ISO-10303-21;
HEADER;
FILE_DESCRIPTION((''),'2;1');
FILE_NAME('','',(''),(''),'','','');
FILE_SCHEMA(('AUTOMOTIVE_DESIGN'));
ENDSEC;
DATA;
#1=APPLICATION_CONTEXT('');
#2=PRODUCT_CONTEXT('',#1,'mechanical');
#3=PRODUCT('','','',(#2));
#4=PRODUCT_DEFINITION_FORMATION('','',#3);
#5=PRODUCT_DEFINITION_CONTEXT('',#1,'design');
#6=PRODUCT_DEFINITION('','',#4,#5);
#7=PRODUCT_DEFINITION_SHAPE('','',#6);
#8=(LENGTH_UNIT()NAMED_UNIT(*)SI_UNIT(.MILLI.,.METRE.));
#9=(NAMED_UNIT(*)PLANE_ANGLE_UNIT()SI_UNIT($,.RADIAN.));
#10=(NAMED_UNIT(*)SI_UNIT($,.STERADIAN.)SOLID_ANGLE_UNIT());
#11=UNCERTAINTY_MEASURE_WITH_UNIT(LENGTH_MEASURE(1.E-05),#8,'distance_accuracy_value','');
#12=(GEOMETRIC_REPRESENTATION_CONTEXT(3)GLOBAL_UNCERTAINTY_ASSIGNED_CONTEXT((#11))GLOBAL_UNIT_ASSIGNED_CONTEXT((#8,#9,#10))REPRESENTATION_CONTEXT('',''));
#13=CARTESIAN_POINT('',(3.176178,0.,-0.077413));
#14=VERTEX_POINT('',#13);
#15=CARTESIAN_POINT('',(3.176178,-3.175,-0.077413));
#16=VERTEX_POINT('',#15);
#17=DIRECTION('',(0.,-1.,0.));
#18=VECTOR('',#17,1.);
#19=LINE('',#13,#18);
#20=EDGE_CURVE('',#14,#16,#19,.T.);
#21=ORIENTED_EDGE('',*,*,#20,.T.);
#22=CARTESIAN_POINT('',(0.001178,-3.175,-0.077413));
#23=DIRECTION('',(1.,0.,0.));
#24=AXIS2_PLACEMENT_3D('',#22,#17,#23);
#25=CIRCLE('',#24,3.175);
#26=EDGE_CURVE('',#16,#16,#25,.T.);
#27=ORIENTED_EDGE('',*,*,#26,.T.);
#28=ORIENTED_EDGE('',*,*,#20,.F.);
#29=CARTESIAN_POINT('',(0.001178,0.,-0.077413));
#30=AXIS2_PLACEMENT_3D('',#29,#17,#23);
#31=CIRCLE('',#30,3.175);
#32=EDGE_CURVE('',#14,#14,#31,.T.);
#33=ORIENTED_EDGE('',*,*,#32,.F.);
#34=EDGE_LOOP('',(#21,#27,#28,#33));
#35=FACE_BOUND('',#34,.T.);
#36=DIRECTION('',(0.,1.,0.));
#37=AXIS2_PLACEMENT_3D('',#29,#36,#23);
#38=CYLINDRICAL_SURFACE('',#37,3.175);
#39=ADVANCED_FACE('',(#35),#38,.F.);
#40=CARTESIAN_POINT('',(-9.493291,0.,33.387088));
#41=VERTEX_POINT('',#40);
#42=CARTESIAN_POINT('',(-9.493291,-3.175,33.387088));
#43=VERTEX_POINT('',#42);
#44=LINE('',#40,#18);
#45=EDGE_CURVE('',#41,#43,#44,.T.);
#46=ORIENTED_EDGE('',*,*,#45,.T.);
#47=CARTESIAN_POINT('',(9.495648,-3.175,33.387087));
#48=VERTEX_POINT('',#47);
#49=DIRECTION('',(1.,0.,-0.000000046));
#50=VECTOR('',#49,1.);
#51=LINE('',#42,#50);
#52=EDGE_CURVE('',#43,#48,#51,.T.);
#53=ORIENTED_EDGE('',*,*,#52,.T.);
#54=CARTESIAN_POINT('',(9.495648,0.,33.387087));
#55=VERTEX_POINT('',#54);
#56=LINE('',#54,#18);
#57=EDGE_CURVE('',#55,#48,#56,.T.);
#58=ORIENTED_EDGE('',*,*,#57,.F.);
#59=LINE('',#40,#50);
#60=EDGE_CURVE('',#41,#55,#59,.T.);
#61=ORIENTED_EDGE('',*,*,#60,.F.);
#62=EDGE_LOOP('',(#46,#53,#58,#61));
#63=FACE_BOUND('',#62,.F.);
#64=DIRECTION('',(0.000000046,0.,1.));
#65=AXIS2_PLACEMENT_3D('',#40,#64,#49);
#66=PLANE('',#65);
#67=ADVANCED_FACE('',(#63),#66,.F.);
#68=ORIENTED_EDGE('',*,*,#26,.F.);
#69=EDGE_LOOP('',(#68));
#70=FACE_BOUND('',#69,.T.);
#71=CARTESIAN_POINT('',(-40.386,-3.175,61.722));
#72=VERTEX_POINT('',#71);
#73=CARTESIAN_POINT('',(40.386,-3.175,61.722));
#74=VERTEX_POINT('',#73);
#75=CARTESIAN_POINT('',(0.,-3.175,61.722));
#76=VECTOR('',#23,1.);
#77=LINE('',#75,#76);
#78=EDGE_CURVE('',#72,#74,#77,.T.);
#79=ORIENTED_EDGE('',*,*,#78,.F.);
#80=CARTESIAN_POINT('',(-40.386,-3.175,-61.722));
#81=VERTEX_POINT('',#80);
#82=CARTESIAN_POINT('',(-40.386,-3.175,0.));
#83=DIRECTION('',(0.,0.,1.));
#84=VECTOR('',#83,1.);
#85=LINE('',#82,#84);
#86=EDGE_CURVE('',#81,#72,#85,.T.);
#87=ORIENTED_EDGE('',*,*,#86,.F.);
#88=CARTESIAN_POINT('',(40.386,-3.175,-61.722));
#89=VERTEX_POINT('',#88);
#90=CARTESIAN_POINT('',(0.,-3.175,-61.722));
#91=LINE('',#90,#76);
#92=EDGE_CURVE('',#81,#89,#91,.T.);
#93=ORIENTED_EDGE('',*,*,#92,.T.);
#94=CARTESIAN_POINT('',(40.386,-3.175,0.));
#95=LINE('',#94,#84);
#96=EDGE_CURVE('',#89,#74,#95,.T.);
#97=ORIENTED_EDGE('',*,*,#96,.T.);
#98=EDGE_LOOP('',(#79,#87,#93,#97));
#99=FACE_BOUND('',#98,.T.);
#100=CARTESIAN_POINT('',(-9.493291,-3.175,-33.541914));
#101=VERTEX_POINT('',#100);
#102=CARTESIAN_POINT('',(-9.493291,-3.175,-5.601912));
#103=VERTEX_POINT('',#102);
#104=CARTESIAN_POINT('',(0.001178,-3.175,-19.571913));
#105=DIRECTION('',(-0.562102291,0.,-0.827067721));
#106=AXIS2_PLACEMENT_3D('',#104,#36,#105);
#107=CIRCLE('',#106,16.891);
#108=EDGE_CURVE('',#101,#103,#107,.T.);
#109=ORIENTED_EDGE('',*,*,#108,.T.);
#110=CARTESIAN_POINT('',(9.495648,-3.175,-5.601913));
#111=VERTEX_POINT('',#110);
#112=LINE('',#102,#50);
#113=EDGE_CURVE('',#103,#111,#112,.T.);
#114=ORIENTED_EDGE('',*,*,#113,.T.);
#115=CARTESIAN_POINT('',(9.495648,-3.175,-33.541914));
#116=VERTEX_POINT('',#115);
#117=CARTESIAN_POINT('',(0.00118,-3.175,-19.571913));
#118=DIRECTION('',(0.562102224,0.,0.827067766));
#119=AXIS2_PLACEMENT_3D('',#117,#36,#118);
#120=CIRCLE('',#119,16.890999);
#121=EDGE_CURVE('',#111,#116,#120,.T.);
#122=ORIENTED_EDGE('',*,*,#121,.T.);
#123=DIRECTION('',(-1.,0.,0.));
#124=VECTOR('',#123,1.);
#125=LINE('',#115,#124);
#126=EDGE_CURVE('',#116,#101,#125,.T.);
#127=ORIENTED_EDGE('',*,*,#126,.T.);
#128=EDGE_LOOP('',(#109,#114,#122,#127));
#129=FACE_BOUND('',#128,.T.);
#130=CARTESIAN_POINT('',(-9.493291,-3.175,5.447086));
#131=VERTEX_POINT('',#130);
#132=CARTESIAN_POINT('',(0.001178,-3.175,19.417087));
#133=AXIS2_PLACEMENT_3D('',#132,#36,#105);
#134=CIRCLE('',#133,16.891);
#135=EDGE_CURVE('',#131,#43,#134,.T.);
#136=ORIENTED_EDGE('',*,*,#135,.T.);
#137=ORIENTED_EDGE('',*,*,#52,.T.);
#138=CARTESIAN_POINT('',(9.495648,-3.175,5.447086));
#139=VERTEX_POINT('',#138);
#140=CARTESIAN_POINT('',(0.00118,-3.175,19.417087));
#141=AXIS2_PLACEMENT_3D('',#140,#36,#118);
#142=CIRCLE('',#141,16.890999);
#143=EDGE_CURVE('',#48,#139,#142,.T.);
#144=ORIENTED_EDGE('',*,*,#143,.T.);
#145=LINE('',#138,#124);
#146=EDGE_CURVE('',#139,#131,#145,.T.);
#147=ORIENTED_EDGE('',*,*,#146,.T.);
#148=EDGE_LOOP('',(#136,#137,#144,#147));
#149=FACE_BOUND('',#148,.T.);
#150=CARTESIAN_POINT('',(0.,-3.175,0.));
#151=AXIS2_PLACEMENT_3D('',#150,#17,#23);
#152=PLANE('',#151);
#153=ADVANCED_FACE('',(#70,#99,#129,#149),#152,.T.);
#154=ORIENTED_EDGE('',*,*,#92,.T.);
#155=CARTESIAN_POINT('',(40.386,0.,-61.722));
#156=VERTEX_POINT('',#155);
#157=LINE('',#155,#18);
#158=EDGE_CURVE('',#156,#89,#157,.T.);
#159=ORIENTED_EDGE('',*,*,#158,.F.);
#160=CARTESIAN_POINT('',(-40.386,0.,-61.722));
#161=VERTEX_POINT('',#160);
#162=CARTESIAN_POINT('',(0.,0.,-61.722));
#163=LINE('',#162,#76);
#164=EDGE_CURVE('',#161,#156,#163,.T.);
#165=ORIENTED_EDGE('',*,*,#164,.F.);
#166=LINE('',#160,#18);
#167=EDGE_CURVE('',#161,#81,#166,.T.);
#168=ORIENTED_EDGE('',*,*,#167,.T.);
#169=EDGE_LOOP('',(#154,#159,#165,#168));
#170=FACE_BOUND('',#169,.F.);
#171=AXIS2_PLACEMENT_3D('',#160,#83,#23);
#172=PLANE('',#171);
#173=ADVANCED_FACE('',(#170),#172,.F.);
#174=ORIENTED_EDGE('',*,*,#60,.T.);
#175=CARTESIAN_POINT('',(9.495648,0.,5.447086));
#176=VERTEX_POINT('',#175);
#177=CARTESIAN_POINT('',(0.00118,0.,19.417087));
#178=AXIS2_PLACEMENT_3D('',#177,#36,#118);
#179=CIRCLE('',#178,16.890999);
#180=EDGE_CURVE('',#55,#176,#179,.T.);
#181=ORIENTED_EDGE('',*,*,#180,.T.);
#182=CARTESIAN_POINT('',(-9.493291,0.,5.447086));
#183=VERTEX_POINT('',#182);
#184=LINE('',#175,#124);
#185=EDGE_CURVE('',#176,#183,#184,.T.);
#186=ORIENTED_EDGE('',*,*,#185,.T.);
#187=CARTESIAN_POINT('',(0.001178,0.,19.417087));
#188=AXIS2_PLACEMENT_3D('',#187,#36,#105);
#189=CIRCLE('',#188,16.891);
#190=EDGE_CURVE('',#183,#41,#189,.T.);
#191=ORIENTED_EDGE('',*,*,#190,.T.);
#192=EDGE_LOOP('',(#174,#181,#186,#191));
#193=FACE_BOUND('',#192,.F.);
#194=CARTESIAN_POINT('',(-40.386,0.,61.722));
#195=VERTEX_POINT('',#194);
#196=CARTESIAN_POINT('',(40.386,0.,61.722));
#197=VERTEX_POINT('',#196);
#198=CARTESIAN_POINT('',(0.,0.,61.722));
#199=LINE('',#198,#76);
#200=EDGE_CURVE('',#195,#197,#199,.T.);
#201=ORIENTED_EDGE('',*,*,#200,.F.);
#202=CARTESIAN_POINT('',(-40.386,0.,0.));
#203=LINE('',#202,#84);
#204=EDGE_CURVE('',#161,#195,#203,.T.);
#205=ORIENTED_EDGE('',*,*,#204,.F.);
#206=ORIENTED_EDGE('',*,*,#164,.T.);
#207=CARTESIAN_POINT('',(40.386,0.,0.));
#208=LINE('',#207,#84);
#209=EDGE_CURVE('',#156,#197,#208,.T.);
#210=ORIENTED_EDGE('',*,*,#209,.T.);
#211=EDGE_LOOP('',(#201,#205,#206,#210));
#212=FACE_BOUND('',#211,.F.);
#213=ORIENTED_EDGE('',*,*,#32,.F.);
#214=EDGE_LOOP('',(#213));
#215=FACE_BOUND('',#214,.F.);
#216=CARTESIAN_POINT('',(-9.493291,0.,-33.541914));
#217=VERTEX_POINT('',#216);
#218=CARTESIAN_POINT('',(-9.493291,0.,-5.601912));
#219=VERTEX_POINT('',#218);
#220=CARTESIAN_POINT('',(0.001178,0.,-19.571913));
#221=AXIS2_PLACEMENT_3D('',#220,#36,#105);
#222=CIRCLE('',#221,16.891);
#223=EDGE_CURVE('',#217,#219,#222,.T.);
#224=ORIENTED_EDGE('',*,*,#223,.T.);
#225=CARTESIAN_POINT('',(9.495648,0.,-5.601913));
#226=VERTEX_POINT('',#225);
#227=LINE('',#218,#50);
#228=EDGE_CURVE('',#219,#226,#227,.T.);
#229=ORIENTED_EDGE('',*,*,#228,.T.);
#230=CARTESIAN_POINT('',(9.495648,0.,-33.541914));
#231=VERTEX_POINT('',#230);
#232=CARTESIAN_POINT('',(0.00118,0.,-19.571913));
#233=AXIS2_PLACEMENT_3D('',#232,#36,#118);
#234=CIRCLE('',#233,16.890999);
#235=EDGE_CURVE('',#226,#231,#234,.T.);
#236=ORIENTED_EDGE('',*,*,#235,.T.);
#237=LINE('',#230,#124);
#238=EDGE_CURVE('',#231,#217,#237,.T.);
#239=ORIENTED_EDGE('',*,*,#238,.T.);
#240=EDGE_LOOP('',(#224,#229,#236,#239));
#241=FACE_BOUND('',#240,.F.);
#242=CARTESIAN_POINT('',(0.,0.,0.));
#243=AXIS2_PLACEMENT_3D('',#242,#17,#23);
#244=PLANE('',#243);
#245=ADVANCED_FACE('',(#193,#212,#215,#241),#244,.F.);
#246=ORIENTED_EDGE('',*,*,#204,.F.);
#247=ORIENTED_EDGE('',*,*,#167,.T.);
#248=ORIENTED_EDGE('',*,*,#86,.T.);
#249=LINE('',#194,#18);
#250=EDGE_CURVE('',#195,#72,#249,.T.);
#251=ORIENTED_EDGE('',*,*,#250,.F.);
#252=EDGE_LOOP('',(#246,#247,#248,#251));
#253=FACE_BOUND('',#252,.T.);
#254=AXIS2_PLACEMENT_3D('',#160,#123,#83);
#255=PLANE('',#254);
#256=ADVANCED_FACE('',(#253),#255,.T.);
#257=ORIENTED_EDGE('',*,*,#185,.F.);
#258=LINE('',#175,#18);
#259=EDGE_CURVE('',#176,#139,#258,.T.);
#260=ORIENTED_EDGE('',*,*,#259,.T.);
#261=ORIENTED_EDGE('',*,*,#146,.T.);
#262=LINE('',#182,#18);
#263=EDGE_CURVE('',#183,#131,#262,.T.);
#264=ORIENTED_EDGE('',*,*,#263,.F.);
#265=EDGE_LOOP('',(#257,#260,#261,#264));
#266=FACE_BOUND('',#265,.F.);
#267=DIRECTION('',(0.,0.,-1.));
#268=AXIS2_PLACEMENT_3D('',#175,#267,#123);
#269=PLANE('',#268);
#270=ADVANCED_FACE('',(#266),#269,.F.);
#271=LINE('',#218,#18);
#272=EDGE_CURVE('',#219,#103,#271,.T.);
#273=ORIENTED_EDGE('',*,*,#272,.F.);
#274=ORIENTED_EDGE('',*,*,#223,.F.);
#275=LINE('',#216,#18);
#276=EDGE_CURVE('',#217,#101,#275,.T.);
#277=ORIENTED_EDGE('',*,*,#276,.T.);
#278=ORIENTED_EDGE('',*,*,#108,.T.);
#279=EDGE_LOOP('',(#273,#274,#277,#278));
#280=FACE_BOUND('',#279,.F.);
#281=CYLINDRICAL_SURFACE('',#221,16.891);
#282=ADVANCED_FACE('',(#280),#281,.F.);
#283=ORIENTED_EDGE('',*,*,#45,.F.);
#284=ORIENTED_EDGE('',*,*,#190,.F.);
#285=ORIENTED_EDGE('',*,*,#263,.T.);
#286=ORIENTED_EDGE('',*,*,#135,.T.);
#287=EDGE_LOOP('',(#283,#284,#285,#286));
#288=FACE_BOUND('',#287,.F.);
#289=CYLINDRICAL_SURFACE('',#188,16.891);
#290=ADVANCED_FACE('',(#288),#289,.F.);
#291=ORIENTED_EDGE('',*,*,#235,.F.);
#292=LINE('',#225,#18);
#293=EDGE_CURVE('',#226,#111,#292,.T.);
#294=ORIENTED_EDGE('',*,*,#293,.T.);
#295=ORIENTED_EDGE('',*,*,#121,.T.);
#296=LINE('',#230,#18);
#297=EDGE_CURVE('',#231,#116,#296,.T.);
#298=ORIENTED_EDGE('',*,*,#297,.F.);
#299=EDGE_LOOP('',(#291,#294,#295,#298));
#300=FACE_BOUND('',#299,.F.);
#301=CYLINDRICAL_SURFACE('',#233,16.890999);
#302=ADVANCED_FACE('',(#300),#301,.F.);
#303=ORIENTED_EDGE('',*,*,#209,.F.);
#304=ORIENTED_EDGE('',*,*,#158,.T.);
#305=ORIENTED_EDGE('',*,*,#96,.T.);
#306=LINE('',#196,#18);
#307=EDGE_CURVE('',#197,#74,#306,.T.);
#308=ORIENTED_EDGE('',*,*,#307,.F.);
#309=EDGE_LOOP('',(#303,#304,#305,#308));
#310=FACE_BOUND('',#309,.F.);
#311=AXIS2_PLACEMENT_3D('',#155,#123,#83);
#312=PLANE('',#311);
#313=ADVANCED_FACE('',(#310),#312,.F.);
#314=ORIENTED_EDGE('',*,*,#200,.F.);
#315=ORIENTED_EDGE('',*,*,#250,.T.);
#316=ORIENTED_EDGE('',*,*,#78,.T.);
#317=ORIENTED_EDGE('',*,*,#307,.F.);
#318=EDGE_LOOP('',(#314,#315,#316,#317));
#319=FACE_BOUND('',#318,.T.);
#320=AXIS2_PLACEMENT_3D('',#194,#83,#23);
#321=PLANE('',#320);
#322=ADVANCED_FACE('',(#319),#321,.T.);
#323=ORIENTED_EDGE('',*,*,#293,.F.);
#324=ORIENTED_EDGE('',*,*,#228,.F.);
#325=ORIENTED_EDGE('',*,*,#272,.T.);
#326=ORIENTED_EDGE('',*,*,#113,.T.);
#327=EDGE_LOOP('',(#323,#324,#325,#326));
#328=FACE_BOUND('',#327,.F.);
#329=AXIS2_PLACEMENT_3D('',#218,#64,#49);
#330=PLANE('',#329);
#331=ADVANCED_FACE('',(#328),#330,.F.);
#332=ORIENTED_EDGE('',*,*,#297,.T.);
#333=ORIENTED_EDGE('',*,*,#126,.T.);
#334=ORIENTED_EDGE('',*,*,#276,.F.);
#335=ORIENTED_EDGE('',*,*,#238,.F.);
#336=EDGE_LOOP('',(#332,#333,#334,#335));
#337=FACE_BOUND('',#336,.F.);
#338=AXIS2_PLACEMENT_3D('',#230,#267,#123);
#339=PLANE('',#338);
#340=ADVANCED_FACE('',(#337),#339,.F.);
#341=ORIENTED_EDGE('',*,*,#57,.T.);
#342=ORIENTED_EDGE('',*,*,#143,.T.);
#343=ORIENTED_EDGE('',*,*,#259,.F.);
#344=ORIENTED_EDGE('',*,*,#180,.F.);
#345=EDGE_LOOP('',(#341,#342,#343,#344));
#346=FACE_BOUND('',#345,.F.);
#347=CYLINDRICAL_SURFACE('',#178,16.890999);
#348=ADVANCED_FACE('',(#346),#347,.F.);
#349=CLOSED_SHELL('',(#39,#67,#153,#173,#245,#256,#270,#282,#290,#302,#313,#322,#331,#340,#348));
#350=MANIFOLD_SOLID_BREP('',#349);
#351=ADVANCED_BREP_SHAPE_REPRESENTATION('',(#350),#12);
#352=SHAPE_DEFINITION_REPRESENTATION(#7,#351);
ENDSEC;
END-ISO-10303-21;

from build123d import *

# Parameters (mm, degrees)
F0_W     = 80.772
F0_H     = 123.444
F0_R     = 3.175
F1_DEPTH = 3.175


# Not quite as in the source:
# - ends of sketch curves that miss each other by under 0.0002 mm in the source are joined


with BuildPart() as f1:
    # F0 (on Front) → F1 (new body)
    with BuildSketch(Plane.XZ):
        Rectangle(F0_W, F0_H)
        with BuildLine():
            ThreePointArc((-9.4932913315, -33.5419135021), (-16.889821539, -19.5719126303), (-9.4932913315, -5.6019117584))
            Line((-9.4932913315, -5.6019117584), (9.495647661, -5.6019126303))
            ThreePointArc((9.495647661, -5.6019126303), (16.892178461, -19.5719126303), (9.4956482536, -33.5419135021))
            Line((9.4956482536, -33.5419135021), (-9.4932913315, -33.5419135021))
        make_face(mode=Mode.SUBTRACT)
        with Locations((0.001178461, -0.0774126303)):
            Circle(F0_R, mode=Mode.SUBTRACT)
        with BuildLine():
            ThreePointArc((-9.4932913315, 5.4470864979), (-16.889821539, 19.4170873697), (-9.4932913315, 33.3870882416))
            Line((-9.4932913315, 33.3870882416), (9.495647661, 33.3870873697))
            ThreePointArc((9.495647661, 33.3870873697), (16.892178461, 19.4170873697), (9.4956482536, 5.4470864979))
            Line((9.4956482536, 5.4470864979), (-9.4932913315, 5.4470864979))
        make_face(mode=Mode.SUBTRACT)
    extrude(amount=F1_DEPTH)


solid = f1.part
